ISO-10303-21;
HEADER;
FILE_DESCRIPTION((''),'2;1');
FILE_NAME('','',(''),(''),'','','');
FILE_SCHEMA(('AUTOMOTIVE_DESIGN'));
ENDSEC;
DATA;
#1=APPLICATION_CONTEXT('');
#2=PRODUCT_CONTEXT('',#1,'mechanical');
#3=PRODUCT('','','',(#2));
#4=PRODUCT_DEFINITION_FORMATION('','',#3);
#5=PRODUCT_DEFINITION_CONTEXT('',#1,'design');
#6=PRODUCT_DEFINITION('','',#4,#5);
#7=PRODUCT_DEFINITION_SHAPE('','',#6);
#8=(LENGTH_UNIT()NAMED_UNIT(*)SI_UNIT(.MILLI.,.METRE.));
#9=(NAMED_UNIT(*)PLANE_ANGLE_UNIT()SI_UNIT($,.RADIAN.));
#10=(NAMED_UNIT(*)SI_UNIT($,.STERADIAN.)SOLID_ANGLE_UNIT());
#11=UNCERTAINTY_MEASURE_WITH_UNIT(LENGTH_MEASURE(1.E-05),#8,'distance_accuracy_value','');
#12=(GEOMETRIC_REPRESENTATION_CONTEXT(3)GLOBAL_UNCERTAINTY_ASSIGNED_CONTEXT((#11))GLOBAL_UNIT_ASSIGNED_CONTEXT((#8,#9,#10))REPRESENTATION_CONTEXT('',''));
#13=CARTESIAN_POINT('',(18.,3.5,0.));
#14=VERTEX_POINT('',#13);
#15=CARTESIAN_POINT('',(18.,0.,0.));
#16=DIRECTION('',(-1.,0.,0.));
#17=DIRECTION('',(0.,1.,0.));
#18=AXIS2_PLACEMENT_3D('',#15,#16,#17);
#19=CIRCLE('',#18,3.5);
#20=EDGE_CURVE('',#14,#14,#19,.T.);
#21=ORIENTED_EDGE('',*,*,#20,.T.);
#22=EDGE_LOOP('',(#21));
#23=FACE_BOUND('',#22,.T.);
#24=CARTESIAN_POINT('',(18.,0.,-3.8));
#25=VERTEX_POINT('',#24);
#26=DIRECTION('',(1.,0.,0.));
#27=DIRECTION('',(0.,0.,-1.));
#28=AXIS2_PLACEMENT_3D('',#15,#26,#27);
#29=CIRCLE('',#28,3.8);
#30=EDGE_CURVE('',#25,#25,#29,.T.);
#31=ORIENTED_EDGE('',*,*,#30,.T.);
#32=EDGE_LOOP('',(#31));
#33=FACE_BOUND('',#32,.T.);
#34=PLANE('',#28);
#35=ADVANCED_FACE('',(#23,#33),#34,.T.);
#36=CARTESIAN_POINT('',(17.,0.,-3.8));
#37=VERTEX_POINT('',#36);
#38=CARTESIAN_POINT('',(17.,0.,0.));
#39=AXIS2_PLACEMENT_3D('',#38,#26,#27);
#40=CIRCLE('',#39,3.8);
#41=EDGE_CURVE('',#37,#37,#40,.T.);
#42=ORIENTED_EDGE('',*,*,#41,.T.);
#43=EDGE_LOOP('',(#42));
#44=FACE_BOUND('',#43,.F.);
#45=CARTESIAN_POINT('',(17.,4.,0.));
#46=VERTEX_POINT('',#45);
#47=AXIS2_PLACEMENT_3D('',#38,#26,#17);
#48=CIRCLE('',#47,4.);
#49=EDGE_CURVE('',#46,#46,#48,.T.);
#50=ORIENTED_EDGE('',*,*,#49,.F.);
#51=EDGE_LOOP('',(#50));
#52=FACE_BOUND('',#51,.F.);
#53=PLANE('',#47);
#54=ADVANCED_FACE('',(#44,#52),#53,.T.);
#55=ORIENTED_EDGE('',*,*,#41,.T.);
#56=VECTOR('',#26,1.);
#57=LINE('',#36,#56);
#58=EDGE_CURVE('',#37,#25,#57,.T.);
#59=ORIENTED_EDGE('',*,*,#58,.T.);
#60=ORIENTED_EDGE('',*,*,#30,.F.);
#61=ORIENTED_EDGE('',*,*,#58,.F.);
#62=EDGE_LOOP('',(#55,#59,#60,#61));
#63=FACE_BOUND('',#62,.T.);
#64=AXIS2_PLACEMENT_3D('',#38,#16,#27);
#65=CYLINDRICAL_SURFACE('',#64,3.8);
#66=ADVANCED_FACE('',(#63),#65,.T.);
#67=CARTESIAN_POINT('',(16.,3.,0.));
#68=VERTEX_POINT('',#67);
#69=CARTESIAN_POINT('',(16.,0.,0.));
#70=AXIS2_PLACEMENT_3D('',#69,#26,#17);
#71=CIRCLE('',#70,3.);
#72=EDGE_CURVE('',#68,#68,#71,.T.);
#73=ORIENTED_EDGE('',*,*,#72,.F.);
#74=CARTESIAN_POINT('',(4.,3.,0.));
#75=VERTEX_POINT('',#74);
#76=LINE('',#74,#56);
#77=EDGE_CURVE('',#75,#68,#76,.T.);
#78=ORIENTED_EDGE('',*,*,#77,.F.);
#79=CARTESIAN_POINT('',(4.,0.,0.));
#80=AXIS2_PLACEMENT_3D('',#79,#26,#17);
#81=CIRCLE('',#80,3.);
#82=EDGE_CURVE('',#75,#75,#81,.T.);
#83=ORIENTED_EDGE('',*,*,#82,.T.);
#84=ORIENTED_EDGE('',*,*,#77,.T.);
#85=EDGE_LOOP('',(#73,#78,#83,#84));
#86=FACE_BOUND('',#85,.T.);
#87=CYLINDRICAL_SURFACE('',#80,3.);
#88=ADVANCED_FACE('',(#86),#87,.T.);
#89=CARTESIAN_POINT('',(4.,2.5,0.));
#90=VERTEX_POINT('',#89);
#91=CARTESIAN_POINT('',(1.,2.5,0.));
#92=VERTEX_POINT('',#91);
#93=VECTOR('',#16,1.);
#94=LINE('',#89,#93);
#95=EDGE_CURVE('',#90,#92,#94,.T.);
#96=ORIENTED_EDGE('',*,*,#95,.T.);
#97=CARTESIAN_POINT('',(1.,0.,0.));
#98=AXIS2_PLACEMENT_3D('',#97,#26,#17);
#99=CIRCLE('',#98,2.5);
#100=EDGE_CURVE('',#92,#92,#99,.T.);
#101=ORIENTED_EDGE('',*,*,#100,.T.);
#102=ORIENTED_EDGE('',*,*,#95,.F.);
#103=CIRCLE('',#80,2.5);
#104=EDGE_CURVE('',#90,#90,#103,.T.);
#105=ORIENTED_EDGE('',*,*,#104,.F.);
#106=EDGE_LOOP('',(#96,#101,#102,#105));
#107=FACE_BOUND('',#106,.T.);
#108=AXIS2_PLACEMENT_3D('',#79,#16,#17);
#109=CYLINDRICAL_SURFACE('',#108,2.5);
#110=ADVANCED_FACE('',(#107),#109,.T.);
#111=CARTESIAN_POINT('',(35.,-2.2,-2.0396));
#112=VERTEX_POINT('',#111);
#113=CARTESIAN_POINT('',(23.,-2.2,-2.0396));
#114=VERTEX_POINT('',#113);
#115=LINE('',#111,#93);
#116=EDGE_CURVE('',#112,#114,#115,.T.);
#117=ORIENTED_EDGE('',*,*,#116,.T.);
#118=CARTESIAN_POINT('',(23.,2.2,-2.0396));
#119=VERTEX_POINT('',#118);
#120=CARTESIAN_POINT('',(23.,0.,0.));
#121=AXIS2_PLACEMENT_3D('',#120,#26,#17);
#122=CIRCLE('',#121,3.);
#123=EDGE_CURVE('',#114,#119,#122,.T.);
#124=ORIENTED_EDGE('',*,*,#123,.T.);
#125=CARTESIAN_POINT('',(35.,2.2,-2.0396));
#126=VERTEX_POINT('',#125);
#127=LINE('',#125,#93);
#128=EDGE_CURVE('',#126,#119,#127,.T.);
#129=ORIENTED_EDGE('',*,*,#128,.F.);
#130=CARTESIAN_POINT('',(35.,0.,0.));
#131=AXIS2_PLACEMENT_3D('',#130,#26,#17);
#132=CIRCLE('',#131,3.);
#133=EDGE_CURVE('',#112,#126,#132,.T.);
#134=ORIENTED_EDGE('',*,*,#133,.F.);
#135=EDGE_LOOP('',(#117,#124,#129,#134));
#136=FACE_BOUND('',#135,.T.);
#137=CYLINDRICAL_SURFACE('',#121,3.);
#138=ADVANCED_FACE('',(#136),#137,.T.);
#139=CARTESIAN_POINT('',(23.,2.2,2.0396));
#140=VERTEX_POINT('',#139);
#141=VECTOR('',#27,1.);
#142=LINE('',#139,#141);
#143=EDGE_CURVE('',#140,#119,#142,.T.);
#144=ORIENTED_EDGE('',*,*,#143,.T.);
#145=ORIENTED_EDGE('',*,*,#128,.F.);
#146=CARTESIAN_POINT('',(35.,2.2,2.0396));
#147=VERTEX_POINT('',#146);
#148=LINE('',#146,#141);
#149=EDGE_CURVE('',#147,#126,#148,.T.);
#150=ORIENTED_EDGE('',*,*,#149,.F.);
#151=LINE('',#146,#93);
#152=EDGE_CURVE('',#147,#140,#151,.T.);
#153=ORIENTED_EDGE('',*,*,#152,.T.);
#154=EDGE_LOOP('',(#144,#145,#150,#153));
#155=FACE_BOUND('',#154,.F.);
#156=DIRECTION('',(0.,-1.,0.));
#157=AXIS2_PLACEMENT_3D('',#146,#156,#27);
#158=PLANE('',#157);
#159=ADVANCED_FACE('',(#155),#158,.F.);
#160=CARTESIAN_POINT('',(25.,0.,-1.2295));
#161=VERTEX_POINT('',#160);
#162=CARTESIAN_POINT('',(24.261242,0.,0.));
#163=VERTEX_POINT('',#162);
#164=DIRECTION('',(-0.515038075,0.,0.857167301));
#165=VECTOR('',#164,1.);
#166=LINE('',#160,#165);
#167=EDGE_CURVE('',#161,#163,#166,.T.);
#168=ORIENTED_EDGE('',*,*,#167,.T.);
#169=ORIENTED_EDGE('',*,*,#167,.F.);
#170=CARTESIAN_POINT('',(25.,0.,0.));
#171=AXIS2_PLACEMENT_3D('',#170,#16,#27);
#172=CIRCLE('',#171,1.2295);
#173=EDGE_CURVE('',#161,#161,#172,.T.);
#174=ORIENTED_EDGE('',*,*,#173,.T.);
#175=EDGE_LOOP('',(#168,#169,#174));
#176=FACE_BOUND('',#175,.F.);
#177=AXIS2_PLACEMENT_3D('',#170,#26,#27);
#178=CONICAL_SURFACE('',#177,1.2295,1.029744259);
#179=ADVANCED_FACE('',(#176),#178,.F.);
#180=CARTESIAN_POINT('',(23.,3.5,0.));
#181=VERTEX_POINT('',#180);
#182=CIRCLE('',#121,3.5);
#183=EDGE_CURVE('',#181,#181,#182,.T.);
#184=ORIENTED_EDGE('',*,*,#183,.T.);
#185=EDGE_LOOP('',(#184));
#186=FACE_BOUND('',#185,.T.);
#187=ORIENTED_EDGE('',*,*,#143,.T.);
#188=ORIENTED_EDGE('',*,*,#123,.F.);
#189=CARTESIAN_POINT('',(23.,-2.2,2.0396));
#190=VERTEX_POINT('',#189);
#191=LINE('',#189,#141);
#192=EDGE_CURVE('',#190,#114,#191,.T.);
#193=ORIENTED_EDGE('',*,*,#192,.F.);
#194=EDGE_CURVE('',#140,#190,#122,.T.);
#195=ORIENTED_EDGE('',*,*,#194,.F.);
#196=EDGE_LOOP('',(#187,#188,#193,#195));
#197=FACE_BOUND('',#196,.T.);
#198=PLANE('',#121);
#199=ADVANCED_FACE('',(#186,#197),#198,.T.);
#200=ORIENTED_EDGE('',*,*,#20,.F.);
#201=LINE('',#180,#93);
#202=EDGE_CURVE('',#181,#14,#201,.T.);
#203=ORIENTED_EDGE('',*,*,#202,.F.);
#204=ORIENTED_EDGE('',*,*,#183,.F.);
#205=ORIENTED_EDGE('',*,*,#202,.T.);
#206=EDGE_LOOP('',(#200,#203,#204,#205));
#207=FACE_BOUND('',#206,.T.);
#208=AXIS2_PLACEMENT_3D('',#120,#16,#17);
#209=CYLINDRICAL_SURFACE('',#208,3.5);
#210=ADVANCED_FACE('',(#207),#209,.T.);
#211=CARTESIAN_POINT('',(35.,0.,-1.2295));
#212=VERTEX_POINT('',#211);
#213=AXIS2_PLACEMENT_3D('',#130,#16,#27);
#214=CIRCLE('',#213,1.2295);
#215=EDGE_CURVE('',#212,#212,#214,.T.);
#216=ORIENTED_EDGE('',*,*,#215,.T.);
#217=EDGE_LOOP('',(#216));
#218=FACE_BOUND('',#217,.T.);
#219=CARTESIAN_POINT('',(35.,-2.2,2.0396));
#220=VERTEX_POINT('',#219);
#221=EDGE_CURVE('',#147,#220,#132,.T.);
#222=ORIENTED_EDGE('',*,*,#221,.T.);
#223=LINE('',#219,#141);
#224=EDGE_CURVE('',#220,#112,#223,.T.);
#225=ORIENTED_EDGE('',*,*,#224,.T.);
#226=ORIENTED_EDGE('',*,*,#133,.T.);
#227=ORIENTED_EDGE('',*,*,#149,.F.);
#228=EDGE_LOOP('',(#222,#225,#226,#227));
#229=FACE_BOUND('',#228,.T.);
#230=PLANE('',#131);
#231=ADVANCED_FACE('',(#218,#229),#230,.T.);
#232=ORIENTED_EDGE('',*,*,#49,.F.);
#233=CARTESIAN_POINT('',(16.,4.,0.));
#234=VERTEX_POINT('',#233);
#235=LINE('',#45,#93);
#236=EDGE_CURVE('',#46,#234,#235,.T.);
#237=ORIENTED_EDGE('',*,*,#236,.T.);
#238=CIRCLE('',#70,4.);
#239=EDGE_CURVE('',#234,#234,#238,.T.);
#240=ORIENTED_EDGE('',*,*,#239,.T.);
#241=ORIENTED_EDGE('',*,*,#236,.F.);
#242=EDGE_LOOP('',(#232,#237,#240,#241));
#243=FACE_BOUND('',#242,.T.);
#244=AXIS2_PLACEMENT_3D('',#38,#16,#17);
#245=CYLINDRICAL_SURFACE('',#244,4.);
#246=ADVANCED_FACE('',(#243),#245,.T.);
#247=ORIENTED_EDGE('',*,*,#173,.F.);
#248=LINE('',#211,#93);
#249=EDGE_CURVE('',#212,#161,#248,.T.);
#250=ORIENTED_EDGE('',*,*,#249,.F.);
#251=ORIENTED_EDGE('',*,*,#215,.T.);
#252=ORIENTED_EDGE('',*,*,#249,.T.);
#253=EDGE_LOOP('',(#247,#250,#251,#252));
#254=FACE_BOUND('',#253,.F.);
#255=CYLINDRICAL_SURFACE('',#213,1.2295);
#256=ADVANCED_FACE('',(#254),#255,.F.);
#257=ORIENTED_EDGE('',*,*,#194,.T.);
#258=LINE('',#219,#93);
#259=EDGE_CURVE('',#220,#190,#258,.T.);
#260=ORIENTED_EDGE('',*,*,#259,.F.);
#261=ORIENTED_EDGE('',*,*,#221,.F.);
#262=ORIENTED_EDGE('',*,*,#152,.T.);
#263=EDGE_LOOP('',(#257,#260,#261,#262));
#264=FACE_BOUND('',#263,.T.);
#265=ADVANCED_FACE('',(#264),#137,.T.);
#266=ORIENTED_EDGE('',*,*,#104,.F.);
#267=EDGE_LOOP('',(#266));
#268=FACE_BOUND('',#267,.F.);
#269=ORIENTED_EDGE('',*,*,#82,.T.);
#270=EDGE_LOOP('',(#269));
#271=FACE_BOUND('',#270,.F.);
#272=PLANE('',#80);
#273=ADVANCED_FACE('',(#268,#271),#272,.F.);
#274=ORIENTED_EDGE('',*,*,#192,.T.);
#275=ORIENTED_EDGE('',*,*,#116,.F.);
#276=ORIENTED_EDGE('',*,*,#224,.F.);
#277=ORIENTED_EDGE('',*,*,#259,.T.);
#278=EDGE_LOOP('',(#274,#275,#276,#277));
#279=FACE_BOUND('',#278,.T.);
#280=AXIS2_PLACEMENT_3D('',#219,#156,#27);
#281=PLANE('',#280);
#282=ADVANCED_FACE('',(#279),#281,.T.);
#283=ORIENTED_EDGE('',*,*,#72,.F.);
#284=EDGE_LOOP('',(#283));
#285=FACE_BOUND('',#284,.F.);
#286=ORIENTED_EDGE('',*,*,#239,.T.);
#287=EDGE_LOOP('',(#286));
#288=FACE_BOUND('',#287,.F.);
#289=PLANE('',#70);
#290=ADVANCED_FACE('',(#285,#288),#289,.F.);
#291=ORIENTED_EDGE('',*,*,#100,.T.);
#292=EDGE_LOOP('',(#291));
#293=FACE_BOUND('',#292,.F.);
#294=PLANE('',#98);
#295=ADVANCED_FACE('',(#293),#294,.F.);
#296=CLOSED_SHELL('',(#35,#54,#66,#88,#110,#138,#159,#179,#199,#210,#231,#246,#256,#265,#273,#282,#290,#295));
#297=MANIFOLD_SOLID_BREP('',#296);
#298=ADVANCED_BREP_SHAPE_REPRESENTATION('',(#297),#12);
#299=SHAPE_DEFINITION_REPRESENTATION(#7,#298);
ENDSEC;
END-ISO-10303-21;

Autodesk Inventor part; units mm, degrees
ref_plane "YZ Plane" through (0, 0, 0) normal (1, 0, 0) x (0, 1, 0)
ref_plane "XZ Plane" through (0, 0, 0) normal (0, 1, 0) x (-1, 0, 0)
ref_plane "XY Plane" through (0, 0, 0) normal (0, 0, 1) x (1, 0, 0)
sketch "Sketch1" plane through (0, 0, 0) normal (0, 0, 1) x (1, 0, 0)
  line L0 (4, 3) -> (6, 3)
  line L1 (6, 3) -> (6, 3)
  line L2 (16.5, 3.5) -> (16.5, 3.5)
  line L3 (35, 3) -> (35, 0)
  line L4 (4, 3) -> (4, 2.5)
  line L5 (4, 2.5) -> (1, 2.5)
  line L6 (1, 2.5) -> (1, 0)
  line L7 (1, 0) -> (35, 0)
  line L8 (23, 3) -> (35, 3)
  line L9 (23, 3.5) -> (17, 3.5)
  line L10 (23, 3.5) -> (23, 3)
  line L11 (17, 3.5) -> (17, 4)
  line L12 (17, 4) -> (16, 4)
  line L13 (16, 4) -> (16, 3)
  line L14 (6, 3) -> (16, 3)
  point P0 (0, 0)
  dimension "d1" = 2
  dimension "d25" = 3
  dimension "d26" = 2.5
  dimension "d40" = 12
  dimension "d41" = 3
  dimension "d42" = 0.5
  dimension "d44" = 6
  dimension "d45" = 1
  dimension "d46" = 10
  dimension "d47" = 3
  dimension "d48" = 3
revolve "Revolution2" add sketch "Sketch1" angle 360 about axis through (1, 0, 0) along (1, 0, 0)
sketch "Sketch3" plane through (35, 0, 0) normal (1, 0, 0) x (0, 0, -1)
  circle A0 centre (0, 0) radius 3 projected
  line L0 (-1.6583, 2.5) -> (1.6583, 2.5)
  line L1 (-1.6583, -2.5) -> (1.6583, -2.5)
  point P0 (0, 0)
  dimension "d21" = 0.5
  dimension "d31" = 0.5
extrude "Extrusion2" [suppressed]
sketch "Sketch4" plane through (4, 0, 0) normal (-1, 0, 0) x (0, 0, 1)
  line L0 (-1.6583, 2.5) -> (1.6583, 2.5)
  circle A0 centre (0, 0) radius 3 projected
  line L1 (-1.6583, -2.5) -> (1.6583, -2.5)
  point P0 (0, 0)
  dimension "d27" = 0.5
  dimension "d30" = 0.5
extrude "Extrusion3" [suppressed]
sketch "Sketch5" plane through (35, 0, 0) normal (1, 0, 0) x (0, 0, -1)
  point P0 (0, 0)
  point P1 (0, 0)
hole "Hole1" at (35, 0, 0) direction (-1, 0, 0) diameter 2.459 depth 10 tip angle 118 thread size "M3x0.5" class "6H" standard "ISO Metric profile"
sketch "Sketch6" plane through (35, 0, 0) normal (1, 0, 0) x (0, 0, -1)
  circle A0 centre (0, 0) radius 1.2295 projected
  circle A1 centre (0, 0) radius 3 projected
  circle A2 centre (0, 0) radius 3 projected
  line L0 (-2.0396, 2.2) -> (2.0396, 2.2)
  line L1 (-2.0396, -2.2) -> (2.0396, -2.2)
  dimension "d56" = 2.2
  dimension "d57" = 2.2
extrude "Extrusion4" cut sketch "Sketch6" against normal up to surface (12 mm away) contours L0 A1 | A1 L1
sketch "Sketch7" plane through (17, 0, 0) normal (1, 0, 0) x (0, 0, -1)
  circle A0 centre (0, 0) radius 4 projected
  circle A1 centre (0, 0) radius 3.5 projected
  circle A2 centre (0, 0) radius 3.8
  point P0 (0, 0)
  dimension "d60" = 0.3
extrude "Extrusion5" add sketch "Sketch7" along normal blind 1 contours A2
equation "\"d57\" = d56"
properties part number "Wał koła" material "Aluminum 6061, Welded"
